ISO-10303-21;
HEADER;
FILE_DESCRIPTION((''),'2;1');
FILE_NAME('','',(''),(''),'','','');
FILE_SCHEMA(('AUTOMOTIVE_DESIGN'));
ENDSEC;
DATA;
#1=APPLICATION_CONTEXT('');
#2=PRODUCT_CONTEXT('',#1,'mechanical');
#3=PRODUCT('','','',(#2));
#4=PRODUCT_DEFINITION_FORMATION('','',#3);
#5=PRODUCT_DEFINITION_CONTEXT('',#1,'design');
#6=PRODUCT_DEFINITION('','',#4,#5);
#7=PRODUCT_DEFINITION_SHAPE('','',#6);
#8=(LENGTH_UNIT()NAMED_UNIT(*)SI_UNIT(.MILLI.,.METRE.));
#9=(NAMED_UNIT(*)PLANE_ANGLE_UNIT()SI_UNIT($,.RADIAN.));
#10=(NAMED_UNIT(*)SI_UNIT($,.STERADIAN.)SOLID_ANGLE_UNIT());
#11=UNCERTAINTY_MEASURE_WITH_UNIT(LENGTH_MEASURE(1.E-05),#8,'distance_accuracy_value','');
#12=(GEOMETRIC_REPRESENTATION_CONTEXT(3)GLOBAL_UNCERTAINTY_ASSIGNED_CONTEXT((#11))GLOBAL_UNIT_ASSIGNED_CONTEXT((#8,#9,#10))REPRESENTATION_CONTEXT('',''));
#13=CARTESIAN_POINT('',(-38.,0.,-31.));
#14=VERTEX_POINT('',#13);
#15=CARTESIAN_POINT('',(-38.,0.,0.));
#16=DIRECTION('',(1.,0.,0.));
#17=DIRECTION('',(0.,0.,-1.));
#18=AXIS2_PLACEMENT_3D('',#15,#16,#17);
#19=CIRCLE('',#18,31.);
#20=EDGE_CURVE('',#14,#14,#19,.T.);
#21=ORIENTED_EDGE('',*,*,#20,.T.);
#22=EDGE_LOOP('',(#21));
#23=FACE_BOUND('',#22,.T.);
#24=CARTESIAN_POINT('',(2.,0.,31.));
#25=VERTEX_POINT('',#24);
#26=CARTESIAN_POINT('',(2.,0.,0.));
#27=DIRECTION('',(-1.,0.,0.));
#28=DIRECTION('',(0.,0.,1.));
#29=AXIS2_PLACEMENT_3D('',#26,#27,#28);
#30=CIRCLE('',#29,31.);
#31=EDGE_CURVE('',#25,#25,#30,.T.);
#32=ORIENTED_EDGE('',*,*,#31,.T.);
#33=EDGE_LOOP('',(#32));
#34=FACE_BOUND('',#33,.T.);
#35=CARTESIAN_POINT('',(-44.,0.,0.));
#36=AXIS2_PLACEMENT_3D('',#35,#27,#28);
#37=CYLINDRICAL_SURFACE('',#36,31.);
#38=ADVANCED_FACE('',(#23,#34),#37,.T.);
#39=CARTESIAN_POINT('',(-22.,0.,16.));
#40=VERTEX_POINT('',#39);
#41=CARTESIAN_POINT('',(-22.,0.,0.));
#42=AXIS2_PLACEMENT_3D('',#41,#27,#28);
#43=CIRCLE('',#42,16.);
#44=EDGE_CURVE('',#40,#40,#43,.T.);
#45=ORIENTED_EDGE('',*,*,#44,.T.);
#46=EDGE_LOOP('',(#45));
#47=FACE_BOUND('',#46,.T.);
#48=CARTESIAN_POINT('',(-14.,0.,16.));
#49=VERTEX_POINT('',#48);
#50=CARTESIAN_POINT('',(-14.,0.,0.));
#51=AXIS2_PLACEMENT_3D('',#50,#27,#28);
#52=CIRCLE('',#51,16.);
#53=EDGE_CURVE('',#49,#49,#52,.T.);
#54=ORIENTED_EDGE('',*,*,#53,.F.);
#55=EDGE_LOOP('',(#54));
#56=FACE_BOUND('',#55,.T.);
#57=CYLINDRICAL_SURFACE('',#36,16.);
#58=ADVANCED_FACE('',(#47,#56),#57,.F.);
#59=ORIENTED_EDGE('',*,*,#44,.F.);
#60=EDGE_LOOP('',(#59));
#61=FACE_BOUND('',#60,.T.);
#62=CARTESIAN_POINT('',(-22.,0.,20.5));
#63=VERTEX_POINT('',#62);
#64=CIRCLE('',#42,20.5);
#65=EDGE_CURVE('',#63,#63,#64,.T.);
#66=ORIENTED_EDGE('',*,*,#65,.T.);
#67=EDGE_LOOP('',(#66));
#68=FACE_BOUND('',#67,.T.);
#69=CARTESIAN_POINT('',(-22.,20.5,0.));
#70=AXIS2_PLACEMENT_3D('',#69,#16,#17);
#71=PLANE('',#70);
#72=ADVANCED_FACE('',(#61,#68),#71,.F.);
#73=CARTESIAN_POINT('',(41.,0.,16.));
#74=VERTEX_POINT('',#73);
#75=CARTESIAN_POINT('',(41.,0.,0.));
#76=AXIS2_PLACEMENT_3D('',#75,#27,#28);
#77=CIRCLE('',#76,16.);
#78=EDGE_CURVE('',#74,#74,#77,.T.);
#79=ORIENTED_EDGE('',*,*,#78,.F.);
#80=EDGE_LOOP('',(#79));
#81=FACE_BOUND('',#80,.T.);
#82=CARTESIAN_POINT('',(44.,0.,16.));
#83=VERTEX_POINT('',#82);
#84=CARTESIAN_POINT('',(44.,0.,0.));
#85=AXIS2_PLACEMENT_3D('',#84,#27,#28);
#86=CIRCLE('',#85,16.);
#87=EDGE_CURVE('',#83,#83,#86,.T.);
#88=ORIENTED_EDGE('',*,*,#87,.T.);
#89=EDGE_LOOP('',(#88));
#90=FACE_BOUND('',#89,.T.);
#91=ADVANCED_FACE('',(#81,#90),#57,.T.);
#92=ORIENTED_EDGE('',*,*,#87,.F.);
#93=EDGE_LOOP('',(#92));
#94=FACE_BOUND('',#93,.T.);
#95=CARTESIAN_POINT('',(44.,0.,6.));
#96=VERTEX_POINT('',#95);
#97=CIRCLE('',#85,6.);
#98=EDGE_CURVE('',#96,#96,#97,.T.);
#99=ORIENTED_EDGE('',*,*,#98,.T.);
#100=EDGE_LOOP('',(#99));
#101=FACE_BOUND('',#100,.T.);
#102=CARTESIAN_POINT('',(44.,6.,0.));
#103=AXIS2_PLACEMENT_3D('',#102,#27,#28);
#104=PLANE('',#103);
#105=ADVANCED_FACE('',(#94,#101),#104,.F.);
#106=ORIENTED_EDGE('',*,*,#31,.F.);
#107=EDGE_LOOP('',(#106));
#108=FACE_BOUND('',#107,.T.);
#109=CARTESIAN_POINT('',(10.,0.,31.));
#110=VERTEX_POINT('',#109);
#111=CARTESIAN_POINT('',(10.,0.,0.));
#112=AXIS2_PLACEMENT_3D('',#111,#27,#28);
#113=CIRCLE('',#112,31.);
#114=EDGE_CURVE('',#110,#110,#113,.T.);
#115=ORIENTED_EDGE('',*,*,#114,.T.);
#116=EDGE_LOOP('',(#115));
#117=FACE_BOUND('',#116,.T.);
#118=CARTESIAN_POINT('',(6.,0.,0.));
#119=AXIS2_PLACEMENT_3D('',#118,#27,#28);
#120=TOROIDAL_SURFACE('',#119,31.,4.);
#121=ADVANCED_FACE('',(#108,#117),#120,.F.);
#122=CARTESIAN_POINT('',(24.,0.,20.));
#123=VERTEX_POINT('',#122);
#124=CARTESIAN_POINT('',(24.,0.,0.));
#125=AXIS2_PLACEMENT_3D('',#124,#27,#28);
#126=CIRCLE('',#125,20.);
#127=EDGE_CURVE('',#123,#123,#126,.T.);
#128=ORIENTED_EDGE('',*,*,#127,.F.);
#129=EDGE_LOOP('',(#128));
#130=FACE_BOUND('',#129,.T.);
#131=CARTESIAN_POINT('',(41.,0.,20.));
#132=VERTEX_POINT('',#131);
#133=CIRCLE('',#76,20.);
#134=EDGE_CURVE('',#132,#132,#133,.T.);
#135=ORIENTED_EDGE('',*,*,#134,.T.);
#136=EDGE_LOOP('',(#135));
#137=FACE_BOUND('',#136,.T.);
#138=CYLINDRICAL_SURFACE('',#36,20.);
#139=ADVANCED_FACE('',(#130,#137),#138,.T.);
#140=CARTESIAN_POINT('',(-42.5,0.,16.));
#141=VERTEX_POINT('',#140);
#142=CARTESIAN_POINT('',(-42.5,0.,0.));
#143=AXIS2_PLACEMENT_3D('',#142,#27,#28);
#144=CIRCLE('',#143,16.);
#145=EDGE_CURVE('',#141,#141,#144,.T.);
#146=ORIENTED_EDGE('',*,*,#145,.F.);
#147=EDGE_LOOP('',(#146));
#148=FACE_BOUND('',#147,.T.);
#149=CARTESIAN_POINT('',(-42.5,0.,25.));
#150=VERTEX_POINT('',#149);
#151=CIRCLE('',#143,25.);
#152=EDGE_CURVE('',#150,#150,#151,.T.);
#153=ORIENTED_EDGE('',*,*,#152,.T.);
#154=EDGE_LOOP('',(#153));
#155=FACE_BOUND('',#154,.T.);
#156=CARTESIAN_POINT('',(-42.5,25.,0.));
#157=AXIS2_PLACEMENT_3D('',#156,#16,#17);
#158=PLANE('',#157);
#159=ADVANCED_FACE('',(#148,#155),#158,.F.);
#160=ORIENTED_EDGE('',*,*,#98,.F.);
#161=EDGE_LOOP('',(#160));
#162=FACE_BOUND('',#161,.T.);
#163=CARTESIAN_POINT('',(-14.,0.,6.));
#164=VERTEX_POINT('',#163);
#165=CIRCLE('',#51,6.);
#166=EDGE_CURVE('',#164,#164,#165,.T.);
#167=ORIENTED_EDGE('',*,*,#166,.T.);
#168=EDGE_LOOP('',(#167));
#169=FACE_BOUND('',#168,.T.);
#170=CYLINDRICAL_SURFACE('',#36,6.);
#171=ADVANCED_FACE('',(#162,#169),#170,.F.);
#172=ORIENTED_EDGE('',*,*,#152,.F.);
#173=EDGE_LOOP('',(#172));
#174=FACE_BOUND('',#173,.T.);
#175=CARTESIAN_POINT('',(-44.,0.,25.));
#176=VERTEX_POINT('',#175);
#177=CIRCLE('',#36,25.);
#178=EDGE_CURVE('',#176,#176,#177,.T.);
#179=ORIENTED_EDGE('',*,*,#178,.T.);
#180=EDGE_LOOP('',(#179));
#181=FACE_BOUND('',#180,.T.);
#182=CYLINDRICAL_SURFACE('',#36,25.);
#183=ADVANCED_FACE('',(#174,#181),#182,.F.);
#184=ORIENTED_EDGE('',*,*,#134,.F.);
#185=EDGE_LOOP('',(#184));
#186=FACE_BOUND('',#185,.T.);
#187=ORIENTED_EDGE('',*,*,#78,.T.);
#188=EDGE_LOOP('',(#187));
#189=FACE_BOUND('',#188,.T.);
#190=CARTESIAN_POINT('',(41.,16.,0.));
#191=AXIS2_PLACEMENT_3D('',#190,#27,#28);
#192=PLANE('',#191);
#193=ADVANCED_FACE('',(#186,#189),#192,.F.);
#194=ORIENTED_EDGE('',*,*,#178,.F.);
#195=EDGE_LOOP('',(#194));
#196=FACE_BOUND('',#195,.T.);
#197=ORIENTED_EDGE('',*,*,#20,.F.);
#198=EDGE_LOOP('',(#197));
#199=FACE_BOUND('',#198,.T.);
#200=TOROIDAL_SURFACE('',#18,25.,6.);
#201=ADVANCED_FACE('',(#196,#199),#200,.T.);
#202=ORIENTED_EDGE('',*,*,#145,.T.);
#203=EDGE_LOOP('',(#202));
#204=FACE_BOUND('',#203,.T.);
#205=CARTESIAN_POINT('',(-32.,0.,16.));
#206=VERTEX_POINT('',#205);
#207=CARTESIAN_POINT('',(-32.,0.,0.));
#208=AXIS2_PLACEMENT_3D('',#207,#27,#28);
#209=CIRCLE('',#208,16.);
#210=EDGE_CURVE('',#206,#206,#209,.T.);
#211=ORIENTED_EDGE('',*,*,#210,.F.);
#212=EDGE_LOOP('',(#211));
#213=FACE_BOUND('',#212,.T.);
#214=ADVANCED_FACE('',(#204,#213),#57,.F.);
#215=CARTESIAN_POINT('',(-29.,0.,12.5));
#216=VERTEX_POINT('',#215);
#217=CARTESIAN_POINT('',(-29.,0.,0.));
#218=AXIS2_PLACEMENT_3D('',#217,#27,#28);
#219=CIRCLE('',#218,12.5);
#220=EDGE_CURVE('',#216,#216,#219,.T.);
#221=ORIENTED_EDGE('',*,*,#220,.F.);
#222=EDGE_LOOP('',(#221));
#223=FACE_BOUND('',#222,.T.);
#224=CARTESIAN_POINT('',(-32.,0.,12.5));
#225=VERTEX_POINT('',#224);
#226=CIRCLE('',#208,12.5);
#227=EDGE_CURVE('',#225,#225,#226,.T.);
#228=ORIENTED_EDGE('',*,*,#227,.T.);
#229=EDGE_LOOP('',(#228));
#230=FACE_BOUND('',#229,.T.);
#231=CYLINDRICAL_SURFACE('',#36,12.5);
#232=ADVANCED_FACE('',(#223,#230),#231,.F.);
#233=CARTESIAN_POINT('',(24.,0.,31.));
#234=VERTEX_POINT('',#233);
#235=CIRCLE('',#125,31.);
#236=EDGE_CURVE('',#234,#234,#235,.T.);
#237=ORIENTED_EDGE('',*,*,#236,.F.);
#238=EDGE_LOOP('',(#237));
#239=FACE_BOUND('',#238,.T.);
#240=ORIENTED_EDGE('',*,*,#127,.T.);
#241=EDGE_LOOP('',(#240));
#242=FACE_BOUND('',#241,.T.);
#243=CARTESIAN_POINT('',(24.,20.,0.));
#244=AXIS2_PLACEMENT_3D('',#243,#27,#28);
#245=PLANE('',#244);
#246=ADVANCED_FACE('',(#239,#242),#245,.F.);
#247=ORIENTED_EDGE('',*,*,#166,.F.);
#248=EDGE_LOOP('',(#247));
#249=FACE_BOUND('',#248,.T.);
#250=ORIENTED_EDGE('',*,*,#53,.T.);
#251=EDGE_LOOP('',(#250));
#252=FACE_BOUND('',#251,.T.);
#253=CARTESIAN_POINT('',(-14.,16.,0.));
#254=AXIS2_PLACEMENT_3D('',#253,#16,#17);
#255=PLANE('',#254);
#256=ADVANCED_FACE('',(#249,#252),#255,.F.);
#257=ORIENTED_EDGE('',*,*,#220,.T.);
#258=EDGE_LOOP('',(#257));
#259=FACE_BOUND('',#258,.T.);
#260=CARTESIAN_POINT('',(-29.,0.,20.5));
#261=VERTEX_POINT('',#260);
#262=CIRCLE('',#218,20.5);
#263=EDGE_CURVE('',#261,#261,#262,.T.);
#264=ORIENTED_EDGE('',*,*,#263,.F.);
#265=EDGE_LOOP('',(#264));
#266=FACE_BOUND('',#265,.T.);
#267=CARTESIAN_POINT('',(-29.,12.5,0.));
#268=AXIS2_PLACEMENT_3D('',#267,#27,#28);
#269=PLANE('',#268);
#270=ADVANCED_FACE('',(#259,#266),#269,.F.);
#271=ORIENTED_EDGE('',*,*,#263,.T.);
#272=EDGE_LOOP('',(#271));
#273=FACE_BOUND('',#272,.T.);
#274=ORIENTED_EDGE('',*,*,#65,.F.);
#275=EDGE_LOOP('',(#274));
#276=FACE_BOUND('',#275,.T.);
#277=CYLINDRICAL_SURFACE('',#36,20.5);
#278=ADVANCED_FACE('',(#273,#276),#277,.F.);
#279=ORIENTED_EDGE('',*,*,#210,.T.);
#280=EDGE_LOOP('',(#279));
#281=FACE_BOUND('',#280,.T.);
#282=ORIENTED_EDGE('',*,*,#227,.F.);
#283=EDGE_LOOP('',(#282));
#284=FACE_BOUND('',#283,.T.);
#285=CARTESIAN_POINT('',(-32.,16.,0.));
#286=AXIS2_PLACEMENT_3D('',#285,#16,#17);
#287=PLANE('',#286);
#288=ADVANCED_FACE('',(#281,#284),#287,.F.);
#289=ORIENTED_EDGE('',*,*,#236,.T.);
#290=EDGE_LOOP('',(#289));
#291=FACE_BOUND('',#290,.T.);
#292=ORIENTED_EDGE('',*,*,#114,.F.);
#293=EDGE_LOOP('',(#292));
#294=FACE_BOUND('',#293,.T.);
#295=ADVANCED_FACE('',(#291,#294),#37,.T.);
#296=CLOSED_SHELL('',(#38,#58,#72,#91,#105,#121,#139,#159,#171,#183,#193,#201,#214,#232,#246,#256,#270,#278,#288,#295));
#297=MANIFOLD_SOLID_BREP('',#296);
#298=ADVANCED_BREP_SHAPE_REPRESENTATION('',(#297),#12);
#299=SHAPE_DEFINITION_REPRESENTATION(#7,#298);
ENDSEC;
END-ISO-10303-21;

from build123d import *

# Parameters (mm, degrees)
FILLET3_R = 6


with BuildPart() as part:
    # Sketch1 → Revolve1 (revolve)
    with BuildSketch(Plane.XY, mode=Mode.PRIVATE) as revolve1_sk:
        with BuildLine():
            Line((44, 6), (44, 16))
            Line((44, 16), (41, 16))
            Line((41, 16), (41, 20))
            Line((41, 20), (24, 20))
            Line((24, 20), (24, 31))
            Line((24, 31), (10, 31))
            ThreePointArc((10, 31), (6, 27), (2, 31))
            Line((2, 31), (-44, 31))
            Line((-44, 31), (-44, 25))
            Line((-44, 25), (-42.5, 25))
            Line((-42.5, 25), (-42.5, 16))
            Line((-42.5, 16), (-32, 16))
            Line((-32, 16), (-32, 12.5))
            Line((-32, 12.5), (-29, 12.5))
            Line((-29, 12.5), (-29, 20.5))
            Line((-29, 20.5), (-22, 20.5))
            Line((-22, 20.5), (-22, 16))
            Line((-22, 16), (-14, 16))
            Line((-14, 16), (-14, 6))
            Line((-14, 6), (44, 6))
        make_face()
    revolve(revolve1_sk.sketch.rotate(Axis((-44, 0, 0), (1, 0, 0)), 90), axis=Axis((-44, 0, 0), (1, 0, 0)))

    # Fillet3
    fillet3_edges = [part.edges().sort_by_distance(p)[0] for p in [
        (-44, 0, -31),
    ]]
    fillet(fillet3_edges, radius=FILLET3_R - 0.0001)  # a hair under: the kernel refuses the full size


solid = part.part
